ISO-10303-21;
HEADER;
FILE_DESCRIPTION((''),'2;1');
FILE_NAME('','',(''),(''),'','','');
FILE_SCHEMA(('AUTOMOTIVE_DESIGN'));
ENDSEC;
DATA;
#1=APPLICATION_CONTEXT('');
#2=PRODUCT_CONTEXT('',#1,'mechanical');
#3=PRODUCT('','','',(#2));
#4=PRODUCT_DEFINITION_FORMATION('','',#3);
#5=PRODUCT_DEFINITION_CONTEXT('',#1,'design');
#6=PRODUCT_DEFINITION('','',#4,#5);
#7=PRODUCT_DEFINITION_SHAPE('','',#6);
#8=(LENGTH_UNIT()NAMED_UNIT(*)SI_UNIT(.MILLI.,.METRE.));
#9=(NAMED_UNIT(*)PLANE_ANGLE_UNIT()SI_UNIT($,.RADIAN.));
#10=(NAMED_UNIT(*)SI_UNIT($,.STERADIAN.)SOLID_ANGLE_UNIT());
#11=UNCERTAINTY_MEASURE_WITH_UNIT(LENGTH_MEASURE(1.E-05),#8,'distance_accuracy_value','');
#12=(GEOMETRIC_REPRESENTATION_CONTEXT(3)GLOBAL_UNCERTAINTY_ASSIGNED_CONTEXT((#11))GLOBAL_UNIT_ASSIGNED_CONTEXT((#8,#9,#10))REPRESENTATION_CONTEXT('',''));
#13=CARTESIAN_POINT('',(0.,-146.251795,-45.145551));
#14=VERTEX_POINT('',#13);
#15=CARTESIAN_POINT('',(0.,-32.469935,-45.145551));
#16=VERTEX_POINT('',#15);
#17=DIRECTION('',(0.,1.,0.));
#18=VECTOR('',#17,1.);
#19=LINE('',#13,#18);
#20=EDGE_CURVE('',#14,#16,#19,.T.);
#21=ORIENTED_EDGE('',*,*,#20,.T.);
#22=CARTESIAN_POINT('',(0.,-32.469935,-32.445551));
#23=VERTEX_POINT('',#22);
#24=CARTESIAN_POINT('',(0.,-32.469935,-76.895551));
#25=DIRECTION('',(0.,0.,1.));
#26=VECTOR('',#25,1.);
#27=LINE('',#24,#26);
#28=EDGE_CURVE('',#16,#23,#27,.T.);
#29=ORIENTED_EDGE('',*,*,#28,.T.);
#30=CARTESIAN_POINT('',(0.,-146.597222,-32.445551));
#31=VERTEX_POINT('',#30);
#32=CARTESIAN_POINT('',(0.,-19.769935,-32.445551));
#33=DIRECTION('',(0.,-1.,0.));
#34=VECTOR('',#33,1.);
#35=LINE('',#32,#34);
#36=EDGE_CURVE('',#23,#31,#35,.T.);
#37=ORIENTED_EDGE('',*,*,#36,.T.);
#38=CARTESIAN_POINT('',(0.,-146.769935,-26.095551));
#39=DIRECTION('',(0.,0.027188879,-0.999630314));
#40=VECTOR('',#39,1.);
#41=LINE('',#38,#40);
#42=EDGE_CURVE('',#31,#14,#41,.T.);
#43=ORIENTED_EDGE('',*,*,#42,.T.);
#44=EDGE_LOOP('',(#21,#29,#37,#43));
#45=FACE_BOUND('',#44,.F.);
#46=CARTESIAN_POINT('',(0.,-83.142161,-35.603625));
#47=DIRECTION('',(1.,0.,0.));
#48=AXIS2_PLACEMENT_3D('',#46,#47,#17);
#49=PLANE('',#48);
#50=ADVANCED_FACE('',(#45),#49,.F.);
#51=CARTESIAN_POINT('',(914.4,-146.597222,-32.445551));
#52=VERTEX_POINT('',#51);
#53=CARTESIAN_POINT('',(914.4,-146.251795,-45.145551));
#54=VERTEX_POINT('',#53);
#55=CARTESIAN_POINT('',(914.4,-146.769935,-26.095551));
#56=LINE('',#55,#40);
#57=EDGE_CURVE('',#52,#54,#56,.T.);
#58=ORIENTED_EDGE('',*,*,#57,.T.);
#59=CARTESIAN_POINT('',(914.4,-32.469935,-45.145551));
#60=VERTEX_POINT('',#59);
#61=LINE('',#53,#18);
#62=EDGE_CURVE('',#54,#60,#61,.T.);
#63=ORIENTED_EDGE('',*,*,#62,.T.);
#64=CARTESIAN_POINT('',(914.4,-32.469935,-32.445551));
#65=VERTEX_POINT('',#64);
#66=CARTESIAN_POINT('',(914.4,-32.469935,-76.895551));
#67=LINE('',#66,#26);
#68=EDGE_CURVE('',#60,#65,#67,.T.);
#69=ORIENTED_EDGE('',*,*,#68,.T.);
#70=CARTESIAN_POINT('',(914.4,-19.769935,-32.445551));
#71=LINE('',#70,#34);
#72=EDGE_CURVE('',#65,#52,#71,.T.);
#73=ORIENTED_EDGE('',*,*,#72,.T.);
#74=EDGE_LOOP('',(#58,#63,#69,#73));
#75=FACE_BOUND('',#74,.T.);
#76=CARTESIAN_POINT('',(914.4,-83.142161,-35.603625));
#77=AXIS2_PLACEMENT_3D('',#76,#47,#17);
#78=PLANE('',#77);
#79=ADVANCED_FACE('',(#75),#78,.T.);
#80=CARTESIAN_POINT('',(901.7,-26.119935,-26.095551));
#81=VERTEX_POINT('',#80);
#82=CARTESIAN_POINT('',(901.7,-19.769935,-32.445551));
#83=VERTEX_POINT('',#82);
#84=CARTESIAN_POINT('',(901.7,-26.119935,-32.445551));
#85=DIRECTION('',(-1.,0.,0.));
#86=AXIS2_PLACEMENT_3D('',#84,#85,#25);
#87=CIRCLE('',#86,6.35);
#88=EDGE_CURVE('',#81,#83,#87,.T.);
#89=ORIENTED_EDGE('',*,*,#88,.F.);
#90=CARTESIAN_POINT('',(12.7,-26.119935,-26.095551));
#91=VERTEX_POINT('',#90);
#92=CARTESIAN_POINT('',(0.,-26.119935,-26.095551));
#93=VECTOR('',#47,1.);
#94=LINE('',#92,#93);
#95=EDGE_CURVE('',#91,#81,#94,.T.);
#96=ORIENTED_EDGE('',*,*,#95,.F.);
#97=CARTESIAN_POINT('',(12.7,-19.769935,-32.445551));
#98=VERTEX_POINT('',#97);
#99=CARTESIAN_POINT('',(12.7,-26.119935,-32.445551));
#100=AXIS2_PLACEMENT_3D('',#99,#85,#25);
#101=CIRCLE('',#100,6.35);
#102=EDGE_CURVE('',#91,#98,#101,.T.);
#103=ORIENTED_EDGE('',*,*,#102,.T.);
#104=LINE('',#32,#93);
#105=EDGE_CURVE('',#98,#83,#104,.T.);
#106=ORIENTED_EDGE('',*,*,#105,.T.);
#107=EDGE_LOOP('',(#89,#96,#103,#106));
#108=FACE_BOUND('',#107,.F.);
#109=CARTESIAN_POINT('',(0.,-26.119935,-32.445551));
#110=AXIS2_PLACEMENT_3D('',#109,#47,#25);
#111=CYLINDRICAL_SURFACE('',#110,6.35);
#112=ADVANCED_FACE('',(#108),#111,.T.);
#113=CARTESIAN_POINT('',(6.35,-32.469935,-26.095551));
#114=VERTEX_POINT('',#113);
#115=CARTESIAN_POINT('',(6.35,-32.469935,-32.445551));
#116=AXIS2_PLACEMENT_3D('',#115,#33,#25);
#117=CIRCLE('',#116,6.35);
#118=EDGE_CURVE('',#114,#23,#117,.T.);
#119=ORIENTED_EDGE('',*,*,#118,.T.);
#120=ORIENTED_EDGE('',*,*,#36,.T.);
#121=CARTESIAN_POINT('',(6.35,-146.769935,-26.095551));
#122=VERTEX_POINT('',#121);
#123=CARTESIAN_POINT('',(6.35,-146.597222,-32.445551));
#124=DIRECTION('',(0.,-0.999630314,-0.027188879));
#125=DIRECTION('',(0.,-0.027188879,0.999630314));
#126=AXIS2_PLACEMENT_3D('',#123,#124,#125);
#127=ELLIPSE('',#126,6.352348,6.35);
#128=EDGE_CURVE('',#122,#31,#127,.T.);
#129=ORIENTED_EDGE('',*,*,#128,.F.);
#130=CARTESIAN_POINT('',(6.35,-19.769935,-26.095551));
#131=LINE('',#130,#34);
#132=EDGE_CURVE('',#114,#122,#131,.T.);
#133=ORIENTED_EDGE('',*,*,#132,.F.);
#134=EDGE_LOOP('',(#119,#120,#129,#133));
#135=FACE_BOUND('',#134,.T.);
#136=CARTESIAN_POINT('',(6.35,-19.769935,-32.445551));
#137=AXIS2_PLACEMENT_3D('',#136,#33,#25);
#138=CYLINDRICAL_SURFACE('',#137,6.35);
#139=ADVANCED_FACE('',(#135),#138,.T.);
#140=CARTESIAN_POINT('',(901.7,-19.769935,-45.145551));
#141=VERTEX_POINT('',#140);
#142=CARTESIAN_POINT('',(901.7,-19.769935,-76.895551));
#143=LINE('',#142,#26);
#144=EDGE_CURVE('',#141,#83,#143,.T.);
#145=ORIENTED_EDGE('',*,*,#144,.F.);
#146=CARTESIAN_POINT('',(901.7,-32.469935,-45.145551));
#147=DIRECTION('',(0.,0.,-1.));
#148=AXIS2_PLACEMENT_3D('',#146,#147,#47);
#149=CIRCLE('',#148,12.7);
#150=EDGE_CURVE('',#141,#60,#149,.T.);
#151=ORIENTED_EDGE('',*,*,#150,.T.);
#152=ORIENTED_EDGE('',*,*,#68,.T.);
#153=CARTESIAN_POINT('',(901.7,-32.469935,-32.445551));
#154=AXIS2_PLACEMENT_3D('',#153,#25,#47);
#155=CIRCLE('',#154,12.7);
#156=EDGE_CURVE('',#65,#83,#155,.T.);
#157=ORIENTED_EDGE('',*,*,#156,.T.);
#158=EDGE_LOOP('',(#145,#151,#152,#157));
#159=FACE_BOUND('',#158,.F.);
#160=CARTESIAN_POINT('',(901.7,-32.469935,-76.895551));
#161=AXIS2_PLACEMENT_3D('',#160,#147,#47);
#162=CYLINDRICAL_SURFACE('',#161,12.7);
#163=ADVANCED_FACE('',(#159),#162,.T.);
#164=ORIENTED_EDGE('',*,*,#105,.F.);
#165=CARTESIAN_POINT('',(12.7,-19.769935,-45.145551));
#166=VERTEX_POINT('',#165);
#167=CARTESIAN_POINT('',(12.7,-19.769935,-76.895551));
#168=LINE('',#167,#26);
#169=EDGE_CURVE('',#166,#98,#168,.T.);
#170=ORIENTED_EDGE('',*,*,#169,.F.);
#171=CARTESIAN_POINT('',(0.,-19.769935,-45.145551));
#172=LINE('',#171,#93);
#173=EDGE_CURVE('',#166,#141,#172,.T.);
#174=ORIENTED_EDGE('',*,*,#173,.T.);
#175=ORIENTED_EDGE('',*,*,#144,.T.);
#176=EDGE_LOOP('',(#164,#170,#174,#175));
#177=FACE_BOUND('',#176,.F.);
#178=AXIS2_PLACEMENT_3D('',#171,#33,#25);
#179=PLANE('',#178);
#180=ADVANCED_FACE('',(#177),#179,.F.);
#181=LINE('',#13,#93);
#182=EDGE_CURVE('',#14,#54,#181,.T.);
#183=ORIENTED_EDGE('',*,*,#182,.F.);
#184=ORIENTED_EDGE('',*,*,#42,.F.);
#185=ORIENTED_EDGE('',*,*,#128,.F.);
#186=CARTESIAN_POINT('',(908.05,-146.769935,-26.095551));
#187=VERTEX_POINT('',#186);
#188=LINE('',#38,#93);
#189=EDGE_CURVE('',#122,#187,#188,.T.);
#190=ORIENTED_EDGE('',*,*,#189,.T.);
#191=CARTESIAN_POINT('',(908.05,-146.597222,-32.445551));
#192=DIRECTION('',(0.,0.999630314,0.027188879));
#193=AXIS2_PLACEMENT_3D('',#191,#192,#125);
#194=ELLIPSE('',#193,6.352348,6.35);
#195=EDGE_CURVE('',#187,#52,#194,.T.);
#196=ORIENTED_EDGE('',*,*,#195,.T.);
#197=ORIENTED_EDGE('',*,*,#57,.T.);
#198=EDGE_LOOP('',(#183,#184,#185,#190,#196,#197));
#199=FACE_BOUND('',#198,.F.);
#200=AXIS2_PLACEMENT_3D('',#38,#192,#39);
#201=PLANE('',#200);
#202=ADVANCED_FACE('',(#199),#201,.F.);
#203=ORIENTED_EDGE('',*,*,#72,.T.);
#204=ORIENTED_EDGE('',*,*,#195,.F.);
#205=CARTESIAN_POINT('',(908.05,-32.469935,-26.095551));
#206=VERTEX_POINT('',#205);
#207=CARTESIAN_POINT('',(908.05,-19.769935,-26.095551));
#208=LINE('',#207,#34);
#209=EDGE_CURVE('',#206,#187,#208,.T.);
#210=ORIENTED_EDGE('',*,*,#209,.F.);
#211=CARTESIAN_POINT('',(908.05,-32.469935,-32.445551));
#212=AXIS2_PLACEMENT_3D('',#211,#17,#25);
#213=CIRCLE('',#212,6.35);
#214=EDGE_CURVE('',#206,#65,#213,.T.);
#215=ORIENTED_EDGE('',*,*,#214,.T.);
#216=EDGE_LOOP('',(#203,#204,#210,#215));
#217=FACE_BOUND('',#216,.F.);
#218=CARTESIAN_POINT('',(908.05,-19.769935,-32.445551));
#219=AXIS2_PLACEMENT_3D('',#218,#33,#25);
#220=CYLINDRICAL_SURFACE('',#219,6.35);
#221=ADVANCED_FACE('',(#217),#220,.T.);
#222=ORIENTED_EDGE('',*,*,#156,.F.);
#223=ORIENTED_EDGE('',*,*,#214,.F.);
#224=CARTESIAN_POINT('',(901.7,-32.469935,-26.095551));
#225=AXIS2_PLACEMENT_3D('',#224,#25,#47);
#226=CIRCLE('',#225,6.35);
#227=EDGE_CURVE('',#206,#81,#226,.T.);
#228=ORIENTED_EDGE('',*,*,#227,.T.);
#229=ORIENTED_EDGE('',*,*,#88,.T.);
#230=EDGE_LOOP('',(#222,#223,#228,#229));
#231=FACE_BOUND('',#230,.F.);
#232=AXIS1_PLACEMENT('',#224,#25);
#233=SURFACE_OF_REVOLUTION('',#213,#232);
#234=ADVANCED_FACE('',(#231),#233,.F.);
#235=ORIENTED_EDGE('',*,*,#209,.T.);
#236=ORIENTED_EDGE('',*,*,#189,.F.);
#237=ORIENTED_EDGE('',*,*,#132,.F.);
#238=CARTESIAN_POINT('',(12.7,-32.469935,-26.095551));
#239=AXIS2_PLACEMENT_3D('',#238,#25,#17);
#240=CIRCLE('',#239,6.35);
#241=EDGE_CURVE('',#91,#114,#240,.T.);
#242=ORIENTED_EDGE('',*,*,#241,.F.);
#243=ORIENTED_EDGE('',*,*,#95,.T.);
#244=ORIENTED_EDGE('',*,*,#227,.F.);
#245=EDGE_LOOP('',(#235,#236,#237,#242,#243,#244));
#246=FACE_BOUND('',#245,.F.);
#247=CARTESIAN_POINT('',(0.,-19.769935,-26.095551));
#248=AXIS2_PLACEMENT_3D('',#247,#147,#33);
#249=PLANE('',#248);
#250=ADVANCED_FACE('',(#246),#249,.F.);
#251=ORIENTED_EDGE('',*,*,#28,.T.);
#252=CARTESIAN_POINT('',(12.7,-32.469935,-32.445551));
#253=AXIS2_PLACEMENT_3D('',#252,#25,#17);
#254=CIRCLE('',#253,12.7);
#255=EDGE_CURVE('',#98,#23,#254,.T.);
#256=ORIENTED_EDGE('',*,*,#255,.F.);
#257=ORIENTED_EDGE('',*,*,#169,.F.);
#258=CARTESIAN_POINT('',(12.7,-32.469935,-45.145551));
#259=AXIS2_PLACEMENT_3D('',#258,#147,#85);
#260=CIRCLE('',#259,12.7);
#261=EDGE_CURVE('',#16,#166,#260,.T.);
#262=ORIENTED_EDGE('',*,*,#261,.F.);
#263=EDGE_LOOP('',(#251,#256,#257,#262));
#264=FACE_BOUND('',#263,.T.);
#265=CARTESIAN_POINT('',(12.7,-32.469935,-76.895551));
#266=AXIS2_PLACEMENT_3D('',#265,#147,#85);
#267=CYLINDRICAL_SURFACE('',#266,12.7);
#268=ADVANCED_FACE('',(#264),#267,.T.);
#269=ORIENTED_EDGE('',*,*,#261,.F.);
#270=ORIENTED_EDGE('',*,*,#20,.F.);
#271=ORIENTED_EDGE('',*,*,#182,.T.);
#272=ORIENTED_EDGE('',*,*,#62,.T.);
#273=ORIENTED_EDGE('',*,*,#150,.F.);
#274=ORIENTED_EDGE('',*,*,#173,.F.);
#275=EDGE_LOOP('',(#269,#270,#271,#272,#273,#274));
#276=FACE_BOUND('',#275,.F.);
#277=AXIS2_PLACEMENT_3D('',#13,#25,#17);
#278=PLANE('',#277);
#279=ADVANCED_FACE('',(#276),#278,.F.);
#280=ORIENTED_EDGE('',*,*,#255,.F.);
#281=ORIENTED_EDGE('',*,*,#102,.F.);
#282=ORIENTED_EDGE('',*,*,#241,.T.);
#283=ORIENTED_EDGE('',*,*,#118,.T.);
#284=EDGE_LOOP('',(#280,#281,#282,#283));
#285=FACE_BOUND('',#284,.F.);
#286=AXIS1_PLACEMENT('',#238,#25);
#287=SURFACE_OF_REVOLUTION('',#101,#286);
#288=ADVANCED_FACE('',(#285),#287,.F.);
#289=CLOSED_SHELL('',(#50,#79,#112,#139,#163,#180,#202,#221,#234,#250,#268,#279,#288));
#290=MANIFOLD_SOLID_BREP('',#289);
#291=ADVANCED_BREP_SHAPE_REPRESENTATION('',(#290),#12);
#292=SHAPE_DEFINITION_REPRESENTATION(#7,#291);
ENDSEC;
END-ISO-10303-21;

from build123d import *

# Parameters (mm, degrees)
F1_DEPTH    = 914.4
F2_R        = 6.35
F3_T1_DEPTH = 50.8
F3_T4_ANGLE = 90
F3_T6_ANGLE = 90


# Not quite as in the source:
# - a fillet or chamfer that OpenCascade refuses, or shapes differently, is made with other operations: its cross-section is extruded or revolved along the edge and cut away or added


with BuildPart() as f1:
    # F0 (on Right) → F1 (new body)
    with BuildSketch(Plane.YZ):
        Polygon((-19.769934752, -26.0955506578), (-146.769934752, -26.0955506578), (-146.2517950619, -45.1455506578), (-19.769934752, -45.1455506578), align=None)
    extrude(amount=F1_DEPTH)

    # F2
    f2_edges = [f1.edges().sort_by_distance(p)[0] for p in [
        (0, -83.269935, -26.095551),
        (457.2, -19.769935, -26.095551),
        (914.4, -83.269935, -26.095551),
    ]]
    fillet(f2_edges, radius=F2_R)

    # F3: fillet of radius 12.7 on 2 edges, made by hand

    # F3_s2 → F3_t1 (cut)
    with BuildSketch(Plane.XY.offset(-76.8955506578)):
        with BuildLine():
            ThreePointArc((914.4, -32.469934752), (910.6802561211, -23.489678631), (901.7, -19.769934752))
            Line((901.7, -19.769934752), (914.4, -19.769934752))
            Line((914.4, -19.769934752), (914.4, -32.469934752))
        make_face()
        with BuildLine():
            ThreePointArc((0, -32.469934752), (3.7197438789, -23.489678631), (12.7, -19.769934752))
            Line((12.7, -19.769934752), (0, -19.769934752))
            Line((0, -19.769934752), (0, -32.469934752))
        make_face()
    extrude(amount=F3_T1_DEPTH, mode=Mode.SUBTRACT)

    # F3_s3 → F3_t4 (revolve, cut)
    with BuildSketch(Plane.YZ.offset(12.7)):
        with BuildLine():
            ThreePointArc((-26.119934752, -26.0955506578), (-21.6298066915, -27.9554225973), (-19.769934752, -32.4455506578))
            Line((-19.769934752, -32.4455506578), (-19.769934752, -26.0955506578))
            Line((-19.769934752, -26.0955506578), (-26.119934752, -26.0955506578))
        make_face()
    revolve(axis=Axis((12.7, -32.469934752, -26.0955506578), (0, 0, 1)), revolution_arc=F3_T4_ANGLE, mode=Mode.SUBTRACT)

    # F3_s5 → F3_t6 (revolve, cut)
    with BuildSketch(Plane.XZ.offset(32.469934752)):
        with BuildLine():
            ThreePointArc((908.05, -26.0955506578), (912.5401280605, -27.9554225973), (914.4, -32.4455506578))
            Line((914.4, -32.4455506578), (914.4, -26.0955506578))
            Line((914.4, -26.0955506578), (908.05, -26.0955506578))
        make_face()
    revolve(axis=Axis((901.7, -32.469934752, -26.0955506578), (0, 0, 1)), revolution_arc=F3_T6_ANGLE, mode=Mode.SUBTRACT)


solid = f1.part
